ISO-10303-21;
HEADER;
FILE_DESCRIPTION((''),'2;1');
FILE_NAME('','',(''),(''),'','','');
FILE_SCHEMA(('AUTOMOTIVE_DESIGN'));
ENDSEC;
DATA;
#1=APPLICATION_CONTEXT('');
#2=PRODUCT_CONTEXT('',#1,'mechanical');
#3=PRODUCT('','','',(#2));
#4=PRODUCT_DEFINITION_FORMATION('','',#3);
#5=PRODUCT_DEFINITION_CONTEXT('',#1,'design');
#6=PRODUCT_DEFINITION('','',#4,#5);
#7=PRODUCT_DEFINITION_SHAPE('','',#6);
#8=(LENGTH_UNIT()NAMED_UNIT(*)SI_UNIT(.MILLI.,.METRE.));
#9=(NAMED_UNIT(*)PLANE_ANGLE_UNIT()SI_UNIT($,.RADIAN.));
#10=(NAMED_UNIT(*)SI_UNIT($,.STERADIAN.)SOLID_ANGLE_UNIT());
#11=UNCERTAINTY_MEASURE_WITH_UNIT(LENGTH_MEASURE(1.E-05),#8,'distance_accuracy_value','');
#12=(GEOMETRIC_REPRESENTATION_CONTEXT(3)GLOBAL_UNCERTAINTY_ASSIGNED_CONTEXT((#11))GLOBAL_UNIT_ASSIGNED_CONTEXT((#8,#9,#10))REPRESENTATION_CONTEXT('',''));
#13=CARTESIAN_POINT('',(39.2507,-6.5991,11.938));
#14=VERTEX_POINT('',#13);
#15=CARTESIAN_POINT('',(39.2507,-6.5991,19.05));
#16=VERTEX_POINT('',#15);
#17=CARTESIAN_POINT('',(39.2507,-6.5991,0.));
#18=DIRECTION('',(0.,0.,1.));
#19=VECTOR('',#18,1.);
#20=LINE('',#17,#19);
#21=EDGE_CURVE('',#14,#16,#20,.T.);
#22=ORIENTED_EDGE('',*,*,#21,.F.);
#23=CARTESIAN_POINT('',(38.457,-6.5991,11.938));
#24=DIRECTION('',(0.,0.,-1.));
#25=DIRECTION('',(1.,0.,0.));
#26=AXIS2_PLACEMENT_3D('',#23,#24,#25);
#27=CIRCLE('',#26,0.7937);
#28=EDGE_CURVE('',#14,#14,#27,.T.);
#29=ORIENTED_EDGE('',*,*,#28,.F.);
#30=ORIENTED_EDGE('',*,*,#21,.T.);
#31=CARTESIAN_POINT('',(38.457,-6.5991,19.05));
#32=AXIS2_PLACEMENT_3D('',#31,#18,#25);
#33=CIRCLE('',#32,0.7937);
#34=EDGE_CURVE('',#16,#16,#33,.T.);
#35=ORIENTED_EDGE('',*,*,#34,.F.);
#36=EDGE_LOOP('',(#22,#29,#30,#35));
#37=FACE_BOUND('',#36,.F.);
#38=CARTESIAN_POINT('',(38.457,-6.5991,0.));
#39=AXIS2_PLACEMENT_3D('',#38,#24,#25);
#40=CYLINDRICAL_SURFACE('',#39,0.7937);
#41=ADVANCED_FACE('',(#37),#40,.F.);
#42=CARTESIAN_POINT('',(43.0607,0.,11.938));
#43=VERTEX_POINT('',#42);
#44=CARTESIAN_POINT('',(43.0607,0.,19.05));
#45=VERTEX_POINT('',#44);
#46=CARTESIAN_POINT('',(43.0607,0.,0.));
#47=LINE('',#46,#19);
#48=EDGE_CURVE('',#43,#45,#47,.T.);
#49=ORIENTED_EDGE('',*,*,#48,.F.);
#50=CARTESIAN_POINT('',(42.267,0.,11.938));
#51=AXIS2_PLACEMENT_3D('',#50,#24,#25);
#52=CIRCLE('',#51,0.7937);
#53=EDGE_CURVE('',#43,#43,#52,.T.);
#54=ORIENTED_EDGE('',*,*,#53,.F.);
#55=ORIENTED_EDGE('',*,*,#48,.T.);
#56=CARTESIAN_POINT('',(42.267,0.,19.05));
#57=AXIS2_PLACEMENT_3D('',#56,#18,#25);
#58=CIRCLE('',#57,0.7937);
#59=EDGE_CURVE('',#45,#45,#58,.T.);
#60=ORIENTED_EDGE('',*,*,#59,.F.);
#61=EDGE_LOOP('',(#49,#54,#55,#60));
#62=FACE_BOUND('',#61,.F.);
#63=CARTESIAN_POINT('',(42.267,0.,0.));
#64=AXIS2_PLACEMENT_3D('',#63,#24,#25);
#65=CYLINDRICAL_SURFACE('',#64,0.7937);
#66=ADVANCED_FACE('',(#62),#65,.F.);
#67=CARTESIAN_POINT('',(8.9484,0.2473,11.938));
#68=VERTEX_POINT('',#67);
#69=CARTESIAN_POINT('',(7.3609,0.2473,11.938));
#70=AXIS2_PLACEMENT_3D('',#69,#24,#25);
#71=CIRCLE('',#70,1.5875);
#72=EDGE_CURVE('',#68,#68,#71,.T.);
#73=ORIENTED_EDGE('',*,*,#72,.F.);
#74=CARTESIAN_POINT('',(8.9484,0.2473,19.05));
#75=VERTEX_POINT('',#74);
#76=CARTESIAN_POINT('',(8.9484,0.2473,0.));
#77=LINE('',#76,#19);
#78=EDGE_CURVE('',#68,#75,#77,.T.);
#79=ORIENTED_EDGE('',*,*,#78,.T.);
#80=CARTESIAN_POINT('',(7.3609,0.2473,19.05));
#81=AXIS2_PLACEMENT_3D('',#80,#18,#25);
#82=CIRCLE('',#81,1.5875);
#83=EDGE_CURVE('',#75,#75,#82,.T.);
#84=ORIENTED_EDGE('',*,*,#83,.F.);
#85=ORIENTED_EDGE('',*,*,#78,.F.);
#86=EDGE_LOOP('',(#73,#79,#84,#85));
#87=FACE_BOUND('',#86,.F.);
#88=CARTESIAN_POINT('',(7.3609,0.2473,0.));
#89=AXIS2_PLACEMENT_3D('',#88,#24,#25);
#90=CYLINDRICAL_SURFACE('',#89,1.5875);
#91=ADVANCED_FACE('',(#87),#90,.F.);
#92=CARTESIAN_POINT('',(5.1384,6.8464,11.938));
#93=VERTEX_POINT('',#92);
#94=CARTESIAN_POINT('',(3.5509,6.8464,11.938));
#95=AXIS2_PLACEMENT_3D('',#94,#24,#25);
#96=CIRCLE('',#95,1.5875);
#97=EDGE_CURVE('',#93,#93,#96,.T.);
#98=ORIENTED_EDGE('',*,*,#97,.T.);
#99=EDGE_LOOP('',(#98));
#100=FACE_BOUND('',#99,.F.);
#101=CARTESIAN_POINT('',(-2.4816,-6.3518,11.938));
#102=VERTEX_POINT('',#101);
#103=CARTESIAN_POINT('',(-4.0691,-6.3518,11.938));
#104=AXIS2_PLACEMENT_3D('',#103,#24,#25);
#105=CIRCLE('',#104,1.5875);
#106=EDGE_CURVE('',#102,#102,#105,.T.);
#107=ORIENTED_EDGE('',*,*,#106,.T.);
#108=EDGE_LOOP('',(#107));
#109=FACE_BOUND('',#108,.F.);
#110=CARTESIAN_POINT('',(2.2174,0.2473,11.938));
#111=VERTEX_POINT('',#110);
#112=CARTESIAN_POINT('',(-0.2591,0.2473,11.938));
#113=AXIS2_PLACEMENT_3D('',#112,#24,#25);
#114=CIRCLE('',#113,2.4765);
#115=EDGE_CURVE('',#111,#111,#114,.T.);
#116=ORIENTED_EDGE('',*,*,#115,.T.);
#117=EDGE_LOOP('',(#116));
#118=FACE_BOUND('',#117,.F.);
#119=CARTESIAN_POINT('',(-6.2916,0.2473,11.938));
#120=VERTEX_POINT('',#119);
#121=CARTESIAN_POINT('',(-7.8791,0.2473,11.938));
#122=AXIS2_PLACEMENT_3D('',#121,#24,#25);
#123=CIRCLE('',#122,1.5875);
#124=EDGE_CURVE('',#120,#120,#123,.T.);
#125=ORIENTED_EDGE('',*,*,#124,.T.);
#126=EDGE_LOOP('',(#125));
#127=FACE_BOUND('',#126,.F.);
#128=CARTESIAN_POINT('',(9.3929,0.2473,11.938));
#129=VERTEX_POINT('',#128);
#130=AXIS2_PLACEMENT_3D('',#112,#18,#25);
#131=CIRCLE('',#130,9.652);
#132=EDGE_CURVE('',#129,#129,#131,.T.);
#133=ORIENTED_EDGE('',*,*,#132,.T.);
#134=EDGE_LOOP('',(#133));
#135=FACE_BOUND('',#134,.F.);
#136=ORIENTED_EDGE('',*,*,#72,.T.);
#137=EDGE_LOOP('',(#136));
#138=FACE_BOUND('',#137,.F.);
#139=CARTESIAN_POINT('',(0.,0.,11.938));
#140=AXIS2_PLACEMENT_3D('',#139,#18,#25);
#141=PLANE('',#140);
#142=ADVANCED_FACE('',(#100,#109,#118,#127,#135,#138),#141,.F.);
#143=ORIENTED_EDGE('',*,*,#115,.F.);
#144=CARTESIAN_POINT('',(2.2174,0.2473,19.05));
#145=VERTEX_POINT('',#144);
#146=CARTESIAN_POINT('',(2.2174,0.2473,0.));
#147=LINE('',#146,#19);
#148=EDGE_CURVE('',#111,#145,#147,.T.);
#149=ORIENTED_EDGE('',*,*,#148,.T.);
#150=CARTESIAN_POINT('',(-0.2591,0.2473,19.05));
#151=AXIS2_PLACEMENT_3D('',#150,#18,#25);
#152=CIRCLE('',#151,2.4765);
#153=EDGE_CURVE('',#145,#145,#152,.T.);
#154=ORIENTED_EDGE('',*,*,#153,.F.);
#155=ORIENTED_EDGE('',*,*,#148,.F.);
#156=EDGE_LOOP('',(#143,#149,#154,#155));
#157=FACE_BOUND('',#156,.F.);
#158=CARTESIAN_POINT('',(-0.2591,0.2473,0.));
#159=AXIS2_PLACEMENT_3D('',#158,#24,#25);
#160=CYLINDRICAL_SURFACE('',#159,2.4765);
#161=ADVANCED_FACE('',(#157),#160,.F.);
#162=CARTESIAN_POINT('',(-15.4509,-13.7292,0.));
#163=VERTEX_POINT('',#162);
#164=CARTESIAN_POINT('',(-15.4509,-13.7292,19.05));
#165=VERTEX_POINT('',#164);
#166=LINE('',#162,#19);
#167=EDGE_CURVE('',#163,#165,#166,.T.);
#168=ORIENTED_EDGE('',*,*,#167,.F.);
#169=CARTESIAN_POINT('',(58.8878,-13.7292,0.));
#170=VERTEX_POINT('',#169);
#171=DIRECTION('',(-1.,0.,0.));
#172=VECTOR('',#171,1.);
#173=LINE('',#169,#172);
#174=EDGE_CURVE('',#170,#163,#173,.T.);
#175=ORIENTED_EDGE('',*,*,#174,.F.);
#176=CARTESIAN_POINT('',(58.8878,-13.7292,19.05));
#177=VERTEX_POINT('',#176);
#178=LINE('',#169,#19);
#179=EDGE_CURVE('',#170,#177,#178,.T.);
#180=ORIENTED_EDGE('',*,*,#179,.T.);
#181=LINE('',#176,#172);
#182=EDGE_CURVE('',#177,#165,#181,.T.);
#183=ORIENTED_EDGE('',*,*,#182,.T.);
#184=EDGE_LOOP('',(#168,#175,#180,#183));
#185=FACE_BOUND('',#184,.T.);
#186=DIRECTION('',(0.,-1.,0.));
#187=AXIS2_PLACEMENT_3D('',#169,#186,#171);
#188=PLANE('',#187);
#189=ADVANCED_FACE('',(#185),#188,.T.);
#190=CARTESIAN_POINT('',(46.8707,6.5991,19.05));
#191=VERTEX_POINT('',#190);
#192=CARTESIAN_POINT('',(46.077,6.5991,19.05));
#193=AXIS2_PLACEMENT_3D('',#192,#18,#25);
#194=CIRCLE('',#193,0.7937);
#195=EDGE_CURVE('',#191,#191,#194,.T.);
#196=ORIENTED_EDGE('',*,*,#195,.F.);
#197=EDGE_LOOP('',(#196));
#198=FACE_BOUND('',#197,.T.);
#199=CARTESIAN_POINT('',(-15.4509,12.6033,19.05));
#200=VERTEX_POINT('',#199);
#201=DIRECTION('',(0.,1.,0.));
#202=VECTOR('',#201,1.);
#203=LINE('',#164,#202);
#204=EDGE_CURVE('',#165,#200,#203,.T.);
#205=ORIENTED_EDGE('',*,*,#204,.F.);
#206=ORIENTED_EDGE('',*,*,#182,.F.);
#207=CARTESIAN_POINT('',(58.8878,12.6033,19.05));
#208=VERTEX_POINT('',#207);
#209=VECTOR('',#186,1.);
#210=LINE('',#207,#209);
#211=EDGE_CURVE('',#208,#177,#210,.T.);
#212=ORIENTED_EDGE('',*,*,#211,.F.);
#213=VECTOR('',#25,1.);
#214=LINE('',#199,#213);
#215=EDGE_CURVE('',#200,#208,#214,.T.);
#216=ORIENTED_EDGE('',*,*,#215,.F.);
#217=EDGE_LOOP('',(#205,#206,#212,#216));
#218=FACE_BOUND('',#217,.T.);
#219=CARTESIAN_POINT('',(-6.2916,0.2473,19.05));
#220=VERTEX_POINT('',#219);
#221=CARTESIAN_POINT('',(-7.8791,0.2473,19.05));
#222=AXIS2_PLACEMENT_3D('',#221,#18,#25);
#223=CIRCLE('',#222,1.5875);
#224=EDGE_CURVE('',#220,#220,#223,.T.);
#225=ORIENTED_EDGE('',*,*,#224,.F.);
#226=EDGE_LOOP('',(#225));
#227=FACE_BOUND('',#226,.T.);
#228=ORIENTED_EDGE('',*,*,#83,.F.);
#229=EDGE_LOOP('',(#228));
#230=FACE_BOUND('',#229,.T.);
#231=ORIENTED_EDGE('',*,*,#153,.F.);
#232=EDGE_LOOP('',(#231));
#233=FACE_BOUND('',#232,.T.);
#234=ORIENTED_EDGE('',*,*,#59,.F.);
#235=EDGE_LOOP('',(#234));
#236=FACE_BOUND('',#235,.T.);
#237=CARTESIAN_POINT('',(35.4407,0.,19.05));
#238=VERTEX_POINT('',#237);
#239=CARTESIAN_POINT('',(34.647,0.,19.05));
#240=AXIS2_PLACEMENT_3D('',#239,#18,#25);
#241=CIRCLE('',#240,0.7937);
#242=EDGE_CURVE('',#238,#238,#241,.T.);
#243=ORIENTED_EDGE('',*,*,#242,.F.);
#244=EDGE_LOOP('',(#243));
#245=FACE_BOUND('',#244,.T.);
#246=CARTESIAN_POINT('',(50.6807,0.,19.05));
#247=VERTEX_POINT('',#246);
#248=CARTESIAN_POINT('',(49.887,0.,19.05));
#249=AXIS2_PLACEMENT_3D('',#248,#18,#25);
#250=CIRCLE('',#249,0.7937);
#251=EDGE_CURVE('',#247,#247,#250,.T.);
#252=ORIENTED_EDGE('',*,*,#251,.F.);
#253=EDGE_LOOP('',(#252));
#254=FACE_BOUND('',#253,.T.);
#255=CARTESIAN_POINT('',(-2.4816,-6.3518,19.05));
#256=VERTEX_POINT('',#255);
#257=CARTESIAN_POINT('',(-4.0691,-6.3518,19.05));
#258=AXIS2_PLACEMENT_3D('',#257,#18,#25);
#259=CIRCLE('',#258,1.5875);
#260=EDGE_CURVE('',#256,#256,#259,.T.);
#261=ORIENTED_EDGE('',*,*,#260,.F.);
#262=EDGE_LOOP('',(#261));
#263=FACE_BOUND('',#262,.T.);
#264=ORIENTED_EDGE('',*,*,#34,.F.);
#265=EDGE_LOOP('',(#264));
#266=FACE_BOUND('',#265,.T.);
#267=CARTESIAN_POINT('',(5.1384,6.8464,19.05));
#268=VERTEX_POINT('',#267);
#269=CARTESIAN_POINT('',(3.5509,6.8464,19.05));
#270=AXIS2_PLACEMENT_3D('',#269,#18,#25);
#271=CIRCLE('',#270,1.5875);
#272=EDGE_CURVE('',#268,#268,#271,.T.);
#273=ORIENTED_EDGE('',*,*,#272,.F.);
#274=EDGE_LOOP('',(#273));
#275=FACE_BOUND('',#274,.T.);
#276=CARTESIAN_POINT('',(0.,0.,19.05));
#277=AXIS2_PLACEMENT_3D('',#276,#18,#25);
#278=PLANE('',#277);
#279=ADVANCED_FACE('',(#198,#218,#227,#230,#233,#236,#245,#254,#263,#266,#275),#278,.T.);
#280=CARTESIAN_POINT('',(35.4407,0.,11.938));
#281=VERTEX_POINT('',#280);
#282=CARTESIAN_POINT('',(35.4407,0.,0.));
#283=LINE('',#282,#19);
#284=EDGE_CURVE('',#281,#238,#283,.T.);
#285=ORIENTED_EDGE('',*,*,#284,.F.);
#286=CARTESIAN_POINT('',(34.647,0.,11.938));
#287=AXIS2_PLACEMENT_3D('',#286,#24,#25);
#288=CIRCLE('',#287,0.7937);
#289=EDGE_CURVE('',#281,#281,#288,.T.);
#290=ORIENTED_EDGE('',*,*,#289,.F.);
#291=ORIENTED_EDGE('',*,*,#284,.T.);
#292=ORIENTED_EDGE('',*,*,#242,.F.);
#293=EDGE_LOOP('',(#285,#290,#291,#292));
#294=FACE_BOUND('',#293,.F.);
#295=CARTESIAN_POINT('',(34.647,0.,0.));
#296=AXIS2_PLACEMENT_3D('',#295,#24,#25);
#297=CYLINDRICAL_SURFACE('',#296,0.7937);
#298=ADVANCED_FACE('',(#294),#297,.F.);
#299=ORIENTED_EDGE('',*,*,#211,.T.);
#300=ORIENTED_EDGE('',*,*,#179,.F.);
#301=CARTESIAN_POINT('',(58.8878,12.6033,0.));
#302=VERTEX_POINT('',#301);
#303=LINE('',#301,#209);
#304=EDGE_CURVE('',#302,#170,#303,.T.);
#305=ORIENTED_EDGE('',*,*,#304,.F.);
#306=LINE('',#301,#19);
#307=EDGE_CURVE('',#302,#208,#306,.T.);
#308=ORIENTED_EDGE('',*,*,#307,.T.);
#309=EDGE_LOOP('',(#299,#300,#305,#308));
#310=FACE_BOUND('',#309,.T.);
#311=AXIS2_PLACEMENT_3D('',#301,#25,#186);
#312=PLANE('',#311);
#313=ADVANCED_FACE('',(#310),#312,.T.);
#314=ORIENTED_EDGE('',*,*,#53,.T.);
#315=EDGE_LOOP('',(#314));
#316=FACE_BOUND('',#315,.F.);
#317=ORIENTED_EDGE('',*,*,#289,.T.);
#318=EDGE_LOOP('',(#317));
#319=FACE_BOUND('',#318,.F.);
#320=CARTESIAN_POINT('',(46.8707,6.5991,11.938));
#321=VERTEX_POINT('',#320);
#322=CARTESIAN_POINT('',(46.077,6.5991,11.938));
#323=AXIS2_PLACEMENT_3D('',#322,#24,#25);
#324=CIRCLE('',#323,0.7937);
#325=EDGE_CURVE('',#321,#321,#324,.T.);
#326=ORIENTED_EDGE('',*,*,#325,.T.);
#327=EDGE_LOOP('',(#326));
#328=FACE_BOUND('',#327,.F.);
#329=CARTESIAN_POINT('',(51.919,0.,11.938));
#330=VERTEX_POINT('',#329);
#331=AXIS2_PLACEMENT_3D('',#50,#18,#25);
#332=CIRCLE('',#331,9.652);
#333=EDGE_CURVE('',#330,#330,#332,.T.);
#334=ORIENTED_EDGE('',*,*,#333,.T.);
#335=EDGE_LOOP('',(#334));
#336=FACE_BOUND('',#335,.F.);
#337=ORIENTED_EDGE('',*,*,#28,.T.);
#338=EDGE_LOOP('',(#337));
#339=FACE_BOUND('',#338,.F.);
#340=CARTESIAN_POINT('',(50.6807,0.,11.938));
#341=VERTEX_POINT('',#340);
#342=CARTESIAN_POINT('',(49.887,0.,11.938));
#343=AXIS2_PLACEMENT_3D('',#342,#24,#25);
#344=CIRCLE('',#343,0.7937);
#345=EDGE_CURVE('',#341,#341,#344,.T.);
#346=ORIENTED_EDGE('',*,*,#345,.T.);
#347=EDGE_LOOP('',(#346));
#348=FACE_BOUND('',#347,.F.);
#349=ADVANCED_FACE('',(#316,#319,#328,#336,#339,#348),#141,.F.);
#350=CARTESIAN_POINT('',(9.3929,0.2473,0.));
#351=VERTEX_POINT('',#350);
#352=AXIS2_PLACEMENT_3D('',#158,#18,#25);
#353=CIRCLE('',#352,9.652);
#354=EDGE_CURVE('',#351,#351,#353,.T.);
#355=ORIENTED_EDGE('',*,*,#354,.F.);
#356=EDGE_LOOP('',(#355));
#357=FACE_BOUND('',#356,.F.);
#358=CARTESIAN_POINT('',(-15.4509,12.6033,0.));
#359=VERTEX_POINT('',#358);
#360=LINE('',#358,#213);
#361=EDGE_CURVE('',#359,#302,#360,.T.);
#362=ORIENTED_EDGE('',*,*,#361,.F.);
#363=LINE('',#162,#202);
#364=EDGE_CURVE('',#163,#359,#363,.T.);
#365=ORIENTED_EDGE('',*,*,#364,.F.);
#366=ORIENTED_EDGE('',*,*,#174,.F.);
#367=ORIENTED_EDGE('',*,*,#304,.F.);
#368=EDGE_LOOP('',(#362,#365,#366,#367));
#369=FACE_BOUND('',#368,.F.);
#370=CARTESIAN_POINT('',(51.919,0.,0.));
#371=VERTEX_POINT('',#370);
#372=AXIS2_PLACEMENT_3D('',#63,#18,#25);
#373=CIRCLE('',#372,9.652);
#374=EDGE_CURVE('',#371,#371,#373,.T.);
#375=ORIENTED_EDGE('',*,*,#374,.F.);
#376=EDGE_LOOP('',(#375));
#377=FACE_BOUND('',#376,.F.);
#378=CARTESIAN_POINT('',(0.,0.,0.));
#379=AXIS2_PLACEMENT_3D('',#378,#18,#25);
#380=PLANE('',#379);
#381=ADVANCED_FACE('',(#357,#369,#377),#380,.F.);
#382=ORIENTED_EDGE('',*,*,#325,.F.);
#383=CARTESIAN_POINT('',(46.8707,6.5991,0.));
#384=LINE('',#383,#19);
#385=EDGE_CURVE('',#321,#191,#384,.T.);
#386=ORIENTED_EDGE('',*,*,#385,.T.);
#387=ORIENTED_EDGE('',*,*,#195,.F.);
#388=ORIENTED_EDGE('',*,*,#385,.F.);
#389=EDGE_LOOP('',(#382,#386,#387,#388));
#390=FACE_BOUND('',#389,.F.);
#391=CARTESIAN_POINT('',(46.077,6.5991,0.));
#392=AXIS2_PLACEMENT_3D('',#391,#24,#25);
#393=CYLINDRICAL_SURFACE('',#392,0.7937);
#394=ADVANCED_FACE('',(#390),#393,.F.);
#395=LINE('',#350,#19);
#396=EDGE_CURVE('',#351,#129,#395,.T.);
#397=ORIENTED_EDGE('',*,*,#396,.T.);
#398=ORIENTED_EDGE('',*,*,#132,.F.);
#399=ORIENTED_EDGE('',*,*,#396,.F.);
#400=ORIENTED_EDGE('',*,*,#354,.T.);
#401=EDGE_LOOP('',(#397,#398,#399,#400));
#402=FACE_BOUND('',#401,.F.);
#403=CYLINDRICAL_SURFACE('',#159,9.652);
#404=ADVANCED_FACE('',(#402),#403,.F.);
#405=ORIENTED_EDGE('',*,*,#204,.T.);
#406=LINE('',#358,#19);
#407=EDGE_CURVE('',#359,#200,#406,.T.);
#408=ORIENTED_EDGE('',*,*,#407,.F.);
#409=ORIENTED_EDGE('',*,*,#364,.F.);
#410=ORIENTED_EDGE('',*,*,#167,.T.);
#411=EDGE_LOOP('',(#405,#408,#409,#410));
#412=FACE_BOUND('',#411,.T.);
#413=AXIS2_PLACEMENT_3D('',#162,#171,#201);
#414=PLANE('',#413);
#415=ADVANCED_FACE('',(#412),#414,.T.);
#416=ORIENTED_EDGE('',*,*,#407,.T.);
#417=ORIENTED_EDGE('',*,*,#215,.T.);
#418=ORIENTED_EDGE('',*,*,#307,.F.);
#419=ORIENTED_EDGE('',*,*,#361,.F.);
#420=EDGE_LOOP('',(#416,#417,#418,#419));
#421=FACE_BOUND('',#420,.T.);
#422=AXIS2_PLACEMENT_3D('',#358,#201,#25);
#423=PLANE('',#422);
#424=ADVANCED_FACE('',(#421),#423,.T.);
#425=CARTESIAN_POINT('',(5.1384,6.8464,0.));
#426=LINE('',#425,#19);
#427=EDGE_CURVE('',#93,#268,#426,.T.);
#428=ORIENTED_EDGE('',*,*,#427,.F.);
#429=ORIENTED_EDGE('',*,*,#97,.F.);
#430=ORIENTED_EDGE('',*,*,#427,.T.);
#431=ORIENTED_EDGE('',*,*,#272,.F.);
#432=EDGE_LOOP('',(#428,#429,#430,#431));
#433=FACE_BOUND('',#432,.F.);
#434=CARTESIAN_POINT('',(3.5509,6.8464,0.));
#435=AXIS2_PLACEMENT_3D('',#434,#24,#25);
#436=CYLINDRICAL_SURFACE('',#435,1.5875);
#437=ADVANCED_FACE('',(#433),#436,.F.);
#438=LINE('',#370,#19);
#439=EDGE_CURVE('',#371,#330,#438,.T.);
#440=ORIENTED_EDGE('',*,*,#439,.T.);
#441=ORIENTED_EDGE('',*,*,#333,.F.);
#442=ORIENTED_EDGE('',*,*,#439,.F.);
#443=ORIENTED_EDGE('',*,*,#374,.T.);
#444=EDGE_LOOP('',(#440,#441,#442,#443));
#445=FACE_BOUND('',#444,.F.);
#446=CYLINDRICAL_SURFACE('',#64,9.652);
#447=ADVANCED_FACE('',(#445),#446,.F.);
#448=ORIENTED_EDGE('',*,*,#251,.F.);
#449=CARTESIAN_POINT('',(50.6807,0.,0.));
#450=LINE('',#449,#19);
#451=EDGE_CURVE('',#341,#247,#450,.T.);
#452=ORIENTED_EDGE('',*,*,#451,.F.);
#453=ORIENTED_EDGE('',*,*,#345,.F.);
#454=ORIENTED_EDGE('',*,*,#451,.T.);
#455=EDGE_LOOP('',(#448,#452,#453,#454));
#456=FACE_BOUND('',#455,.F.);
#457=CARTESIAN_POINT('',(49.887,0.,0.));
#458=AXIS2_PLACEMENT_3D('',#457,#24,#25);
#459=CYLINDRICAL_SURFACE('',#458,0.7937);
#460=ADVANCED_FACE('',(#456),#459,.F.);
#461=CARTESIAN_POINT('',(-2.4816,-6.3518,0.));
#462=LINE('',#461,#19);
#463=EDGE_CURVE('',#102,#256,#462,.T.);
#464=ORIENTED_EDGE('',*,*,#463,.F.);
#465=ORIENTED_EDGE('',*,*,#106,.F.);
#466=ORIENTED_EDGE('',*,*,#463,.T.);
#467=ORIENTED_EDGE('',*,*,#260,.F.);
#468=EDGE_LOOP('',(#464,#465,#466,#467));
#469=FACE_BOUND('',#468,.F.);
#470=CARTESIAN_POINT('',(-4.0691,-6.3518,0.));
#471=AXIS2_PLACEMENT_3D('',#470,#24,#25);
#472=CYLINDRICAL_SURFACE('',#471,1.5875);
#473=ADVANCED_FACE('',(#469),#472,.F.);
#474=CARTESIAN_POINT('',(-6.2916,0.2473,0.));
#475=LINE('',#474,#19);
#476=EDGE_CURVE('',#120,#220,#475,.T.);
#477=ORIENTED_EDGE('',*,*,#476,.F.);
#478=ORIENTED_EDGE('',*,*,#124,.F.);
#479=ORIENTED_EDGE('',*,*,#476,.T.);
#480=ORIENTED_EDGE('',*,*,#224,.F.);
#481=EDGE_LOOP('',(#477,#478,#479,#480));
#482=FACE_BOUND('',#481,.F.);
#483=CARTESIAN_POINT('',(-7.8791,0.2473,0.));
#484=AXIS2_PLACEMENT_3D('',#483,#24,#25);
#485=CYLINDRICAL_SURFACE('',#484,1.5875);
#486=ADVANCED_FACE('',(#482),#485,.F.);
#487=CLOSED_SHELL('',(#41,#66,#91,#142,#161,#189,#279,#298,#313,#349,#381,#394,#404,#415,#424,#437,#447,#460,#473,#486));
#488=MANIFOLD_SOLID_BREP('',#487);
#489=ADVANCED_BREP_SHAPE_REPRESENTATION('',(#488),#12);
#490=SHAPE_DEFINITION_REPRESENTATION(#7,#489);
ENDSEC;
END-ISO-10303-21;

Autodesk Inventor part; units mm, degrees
ref_plane "YZ Plane" through (0, 0, 0) normal (1, 0, 0) x (0, 1, 0)
ref_plane "XZ Plane" through (0, 0, 0) normal (0, 1, 0) x (-1, 0, 0)
ref_plane "XY Plane" through (0, 0, 0) normal (0, 0, 1) x (1, 0, 0)
sketch "Sketch1" plane through (0, 0, 0) normal (0, 0, 1) x (1, 0, 0)
  circle A0 centre (49.887, 0) radius 0.7937
  circle A1 centre (34.647, 0) radius 0.7937
  circle A2 centre (42.267, 0) radius 9.525
  circle A3 centre (38.457, -6.5991) radius 0.7937
  circle A4 centre (46.077, 6.5991) radius 0.7937
  circle A5 centre (42.267, 0) radius 0.7937
  line L0 (-15.4509, 12.6033) -> (58.8878, 12.6033)
  line L1 (58.8878, 12.6033) -> (58.8878, -13.7292)
  line L2 (58.8878, -13.7292) -> (-15.4509, -13.7292)
  line L3 (-15.4509, -13.7292) -> (-15.4509, 12.6033)
  circle A6 centre (7.3609, 0.2473) radius 1.5875
  circle A7 centre (-7.8791, 0.2473) radius 1.5875
  circle A8 centre (-0.2591, 0.2473) radius 9.525
  circle A9 centre (3.5509, 6.8464) radius 1.5875
  circle A10 centre (-4.0691, -6.3518) radius 1.5875
  circle A11 centre (-0.2591, 0.2473) radius 2.4765
  circle A12 centre (42.267, 0) radius 9.652
  circle A13 centre (-0.2591, 0.2473) radius 9.652
  point P0 (37.5045, -8.2489)
  point P1 (47.0295, 8.2489)
  point P2 (-5.0216, -8.0016)
  point P3 (4.5034, 8.4962)
  dimension "d69" = 1.5875
  dimension "d70" = 1.5875
  dimension "d75" = 1.5875
  dimension "d76" = 1.5875
  dimension "d79" = 7.62
  dimension "d80" = 7.62
  dimension "d82" = 1.5875
  dimension "d83" = 7.62
  dimension "d84" = 7.62
  dimension "d85" = 3.175
  dimension "d86" = 3.175
  dimension "d87" = 3.175
  dimension "d88" = 3.175
  dimension "d89" = 7.62
  dimension "d90" = 7.62
  dimension "d91" = 4.953
  dimension "d92" = 7.62
  dimension "d93" = 7.62
  dimension "d95" = 19.304
  dimension "d96" = 19.304
extrude "Extrusion14" add sketch "Sketch1" along normal blind 19.05 contours A2 | L0 L1 L2 L3 | A8 | A12 | A13
extrude "Extrusion15" cut sketch "Sketch1" along normal blind 11.938 contours A0 | A1 | A2 | A3 | A4 | A5 | A6 | A7 | A8 | A9 | A10 | A11 | A12 | A13
properties part number "C.Crank Connect Shaft Cutting Jig"
